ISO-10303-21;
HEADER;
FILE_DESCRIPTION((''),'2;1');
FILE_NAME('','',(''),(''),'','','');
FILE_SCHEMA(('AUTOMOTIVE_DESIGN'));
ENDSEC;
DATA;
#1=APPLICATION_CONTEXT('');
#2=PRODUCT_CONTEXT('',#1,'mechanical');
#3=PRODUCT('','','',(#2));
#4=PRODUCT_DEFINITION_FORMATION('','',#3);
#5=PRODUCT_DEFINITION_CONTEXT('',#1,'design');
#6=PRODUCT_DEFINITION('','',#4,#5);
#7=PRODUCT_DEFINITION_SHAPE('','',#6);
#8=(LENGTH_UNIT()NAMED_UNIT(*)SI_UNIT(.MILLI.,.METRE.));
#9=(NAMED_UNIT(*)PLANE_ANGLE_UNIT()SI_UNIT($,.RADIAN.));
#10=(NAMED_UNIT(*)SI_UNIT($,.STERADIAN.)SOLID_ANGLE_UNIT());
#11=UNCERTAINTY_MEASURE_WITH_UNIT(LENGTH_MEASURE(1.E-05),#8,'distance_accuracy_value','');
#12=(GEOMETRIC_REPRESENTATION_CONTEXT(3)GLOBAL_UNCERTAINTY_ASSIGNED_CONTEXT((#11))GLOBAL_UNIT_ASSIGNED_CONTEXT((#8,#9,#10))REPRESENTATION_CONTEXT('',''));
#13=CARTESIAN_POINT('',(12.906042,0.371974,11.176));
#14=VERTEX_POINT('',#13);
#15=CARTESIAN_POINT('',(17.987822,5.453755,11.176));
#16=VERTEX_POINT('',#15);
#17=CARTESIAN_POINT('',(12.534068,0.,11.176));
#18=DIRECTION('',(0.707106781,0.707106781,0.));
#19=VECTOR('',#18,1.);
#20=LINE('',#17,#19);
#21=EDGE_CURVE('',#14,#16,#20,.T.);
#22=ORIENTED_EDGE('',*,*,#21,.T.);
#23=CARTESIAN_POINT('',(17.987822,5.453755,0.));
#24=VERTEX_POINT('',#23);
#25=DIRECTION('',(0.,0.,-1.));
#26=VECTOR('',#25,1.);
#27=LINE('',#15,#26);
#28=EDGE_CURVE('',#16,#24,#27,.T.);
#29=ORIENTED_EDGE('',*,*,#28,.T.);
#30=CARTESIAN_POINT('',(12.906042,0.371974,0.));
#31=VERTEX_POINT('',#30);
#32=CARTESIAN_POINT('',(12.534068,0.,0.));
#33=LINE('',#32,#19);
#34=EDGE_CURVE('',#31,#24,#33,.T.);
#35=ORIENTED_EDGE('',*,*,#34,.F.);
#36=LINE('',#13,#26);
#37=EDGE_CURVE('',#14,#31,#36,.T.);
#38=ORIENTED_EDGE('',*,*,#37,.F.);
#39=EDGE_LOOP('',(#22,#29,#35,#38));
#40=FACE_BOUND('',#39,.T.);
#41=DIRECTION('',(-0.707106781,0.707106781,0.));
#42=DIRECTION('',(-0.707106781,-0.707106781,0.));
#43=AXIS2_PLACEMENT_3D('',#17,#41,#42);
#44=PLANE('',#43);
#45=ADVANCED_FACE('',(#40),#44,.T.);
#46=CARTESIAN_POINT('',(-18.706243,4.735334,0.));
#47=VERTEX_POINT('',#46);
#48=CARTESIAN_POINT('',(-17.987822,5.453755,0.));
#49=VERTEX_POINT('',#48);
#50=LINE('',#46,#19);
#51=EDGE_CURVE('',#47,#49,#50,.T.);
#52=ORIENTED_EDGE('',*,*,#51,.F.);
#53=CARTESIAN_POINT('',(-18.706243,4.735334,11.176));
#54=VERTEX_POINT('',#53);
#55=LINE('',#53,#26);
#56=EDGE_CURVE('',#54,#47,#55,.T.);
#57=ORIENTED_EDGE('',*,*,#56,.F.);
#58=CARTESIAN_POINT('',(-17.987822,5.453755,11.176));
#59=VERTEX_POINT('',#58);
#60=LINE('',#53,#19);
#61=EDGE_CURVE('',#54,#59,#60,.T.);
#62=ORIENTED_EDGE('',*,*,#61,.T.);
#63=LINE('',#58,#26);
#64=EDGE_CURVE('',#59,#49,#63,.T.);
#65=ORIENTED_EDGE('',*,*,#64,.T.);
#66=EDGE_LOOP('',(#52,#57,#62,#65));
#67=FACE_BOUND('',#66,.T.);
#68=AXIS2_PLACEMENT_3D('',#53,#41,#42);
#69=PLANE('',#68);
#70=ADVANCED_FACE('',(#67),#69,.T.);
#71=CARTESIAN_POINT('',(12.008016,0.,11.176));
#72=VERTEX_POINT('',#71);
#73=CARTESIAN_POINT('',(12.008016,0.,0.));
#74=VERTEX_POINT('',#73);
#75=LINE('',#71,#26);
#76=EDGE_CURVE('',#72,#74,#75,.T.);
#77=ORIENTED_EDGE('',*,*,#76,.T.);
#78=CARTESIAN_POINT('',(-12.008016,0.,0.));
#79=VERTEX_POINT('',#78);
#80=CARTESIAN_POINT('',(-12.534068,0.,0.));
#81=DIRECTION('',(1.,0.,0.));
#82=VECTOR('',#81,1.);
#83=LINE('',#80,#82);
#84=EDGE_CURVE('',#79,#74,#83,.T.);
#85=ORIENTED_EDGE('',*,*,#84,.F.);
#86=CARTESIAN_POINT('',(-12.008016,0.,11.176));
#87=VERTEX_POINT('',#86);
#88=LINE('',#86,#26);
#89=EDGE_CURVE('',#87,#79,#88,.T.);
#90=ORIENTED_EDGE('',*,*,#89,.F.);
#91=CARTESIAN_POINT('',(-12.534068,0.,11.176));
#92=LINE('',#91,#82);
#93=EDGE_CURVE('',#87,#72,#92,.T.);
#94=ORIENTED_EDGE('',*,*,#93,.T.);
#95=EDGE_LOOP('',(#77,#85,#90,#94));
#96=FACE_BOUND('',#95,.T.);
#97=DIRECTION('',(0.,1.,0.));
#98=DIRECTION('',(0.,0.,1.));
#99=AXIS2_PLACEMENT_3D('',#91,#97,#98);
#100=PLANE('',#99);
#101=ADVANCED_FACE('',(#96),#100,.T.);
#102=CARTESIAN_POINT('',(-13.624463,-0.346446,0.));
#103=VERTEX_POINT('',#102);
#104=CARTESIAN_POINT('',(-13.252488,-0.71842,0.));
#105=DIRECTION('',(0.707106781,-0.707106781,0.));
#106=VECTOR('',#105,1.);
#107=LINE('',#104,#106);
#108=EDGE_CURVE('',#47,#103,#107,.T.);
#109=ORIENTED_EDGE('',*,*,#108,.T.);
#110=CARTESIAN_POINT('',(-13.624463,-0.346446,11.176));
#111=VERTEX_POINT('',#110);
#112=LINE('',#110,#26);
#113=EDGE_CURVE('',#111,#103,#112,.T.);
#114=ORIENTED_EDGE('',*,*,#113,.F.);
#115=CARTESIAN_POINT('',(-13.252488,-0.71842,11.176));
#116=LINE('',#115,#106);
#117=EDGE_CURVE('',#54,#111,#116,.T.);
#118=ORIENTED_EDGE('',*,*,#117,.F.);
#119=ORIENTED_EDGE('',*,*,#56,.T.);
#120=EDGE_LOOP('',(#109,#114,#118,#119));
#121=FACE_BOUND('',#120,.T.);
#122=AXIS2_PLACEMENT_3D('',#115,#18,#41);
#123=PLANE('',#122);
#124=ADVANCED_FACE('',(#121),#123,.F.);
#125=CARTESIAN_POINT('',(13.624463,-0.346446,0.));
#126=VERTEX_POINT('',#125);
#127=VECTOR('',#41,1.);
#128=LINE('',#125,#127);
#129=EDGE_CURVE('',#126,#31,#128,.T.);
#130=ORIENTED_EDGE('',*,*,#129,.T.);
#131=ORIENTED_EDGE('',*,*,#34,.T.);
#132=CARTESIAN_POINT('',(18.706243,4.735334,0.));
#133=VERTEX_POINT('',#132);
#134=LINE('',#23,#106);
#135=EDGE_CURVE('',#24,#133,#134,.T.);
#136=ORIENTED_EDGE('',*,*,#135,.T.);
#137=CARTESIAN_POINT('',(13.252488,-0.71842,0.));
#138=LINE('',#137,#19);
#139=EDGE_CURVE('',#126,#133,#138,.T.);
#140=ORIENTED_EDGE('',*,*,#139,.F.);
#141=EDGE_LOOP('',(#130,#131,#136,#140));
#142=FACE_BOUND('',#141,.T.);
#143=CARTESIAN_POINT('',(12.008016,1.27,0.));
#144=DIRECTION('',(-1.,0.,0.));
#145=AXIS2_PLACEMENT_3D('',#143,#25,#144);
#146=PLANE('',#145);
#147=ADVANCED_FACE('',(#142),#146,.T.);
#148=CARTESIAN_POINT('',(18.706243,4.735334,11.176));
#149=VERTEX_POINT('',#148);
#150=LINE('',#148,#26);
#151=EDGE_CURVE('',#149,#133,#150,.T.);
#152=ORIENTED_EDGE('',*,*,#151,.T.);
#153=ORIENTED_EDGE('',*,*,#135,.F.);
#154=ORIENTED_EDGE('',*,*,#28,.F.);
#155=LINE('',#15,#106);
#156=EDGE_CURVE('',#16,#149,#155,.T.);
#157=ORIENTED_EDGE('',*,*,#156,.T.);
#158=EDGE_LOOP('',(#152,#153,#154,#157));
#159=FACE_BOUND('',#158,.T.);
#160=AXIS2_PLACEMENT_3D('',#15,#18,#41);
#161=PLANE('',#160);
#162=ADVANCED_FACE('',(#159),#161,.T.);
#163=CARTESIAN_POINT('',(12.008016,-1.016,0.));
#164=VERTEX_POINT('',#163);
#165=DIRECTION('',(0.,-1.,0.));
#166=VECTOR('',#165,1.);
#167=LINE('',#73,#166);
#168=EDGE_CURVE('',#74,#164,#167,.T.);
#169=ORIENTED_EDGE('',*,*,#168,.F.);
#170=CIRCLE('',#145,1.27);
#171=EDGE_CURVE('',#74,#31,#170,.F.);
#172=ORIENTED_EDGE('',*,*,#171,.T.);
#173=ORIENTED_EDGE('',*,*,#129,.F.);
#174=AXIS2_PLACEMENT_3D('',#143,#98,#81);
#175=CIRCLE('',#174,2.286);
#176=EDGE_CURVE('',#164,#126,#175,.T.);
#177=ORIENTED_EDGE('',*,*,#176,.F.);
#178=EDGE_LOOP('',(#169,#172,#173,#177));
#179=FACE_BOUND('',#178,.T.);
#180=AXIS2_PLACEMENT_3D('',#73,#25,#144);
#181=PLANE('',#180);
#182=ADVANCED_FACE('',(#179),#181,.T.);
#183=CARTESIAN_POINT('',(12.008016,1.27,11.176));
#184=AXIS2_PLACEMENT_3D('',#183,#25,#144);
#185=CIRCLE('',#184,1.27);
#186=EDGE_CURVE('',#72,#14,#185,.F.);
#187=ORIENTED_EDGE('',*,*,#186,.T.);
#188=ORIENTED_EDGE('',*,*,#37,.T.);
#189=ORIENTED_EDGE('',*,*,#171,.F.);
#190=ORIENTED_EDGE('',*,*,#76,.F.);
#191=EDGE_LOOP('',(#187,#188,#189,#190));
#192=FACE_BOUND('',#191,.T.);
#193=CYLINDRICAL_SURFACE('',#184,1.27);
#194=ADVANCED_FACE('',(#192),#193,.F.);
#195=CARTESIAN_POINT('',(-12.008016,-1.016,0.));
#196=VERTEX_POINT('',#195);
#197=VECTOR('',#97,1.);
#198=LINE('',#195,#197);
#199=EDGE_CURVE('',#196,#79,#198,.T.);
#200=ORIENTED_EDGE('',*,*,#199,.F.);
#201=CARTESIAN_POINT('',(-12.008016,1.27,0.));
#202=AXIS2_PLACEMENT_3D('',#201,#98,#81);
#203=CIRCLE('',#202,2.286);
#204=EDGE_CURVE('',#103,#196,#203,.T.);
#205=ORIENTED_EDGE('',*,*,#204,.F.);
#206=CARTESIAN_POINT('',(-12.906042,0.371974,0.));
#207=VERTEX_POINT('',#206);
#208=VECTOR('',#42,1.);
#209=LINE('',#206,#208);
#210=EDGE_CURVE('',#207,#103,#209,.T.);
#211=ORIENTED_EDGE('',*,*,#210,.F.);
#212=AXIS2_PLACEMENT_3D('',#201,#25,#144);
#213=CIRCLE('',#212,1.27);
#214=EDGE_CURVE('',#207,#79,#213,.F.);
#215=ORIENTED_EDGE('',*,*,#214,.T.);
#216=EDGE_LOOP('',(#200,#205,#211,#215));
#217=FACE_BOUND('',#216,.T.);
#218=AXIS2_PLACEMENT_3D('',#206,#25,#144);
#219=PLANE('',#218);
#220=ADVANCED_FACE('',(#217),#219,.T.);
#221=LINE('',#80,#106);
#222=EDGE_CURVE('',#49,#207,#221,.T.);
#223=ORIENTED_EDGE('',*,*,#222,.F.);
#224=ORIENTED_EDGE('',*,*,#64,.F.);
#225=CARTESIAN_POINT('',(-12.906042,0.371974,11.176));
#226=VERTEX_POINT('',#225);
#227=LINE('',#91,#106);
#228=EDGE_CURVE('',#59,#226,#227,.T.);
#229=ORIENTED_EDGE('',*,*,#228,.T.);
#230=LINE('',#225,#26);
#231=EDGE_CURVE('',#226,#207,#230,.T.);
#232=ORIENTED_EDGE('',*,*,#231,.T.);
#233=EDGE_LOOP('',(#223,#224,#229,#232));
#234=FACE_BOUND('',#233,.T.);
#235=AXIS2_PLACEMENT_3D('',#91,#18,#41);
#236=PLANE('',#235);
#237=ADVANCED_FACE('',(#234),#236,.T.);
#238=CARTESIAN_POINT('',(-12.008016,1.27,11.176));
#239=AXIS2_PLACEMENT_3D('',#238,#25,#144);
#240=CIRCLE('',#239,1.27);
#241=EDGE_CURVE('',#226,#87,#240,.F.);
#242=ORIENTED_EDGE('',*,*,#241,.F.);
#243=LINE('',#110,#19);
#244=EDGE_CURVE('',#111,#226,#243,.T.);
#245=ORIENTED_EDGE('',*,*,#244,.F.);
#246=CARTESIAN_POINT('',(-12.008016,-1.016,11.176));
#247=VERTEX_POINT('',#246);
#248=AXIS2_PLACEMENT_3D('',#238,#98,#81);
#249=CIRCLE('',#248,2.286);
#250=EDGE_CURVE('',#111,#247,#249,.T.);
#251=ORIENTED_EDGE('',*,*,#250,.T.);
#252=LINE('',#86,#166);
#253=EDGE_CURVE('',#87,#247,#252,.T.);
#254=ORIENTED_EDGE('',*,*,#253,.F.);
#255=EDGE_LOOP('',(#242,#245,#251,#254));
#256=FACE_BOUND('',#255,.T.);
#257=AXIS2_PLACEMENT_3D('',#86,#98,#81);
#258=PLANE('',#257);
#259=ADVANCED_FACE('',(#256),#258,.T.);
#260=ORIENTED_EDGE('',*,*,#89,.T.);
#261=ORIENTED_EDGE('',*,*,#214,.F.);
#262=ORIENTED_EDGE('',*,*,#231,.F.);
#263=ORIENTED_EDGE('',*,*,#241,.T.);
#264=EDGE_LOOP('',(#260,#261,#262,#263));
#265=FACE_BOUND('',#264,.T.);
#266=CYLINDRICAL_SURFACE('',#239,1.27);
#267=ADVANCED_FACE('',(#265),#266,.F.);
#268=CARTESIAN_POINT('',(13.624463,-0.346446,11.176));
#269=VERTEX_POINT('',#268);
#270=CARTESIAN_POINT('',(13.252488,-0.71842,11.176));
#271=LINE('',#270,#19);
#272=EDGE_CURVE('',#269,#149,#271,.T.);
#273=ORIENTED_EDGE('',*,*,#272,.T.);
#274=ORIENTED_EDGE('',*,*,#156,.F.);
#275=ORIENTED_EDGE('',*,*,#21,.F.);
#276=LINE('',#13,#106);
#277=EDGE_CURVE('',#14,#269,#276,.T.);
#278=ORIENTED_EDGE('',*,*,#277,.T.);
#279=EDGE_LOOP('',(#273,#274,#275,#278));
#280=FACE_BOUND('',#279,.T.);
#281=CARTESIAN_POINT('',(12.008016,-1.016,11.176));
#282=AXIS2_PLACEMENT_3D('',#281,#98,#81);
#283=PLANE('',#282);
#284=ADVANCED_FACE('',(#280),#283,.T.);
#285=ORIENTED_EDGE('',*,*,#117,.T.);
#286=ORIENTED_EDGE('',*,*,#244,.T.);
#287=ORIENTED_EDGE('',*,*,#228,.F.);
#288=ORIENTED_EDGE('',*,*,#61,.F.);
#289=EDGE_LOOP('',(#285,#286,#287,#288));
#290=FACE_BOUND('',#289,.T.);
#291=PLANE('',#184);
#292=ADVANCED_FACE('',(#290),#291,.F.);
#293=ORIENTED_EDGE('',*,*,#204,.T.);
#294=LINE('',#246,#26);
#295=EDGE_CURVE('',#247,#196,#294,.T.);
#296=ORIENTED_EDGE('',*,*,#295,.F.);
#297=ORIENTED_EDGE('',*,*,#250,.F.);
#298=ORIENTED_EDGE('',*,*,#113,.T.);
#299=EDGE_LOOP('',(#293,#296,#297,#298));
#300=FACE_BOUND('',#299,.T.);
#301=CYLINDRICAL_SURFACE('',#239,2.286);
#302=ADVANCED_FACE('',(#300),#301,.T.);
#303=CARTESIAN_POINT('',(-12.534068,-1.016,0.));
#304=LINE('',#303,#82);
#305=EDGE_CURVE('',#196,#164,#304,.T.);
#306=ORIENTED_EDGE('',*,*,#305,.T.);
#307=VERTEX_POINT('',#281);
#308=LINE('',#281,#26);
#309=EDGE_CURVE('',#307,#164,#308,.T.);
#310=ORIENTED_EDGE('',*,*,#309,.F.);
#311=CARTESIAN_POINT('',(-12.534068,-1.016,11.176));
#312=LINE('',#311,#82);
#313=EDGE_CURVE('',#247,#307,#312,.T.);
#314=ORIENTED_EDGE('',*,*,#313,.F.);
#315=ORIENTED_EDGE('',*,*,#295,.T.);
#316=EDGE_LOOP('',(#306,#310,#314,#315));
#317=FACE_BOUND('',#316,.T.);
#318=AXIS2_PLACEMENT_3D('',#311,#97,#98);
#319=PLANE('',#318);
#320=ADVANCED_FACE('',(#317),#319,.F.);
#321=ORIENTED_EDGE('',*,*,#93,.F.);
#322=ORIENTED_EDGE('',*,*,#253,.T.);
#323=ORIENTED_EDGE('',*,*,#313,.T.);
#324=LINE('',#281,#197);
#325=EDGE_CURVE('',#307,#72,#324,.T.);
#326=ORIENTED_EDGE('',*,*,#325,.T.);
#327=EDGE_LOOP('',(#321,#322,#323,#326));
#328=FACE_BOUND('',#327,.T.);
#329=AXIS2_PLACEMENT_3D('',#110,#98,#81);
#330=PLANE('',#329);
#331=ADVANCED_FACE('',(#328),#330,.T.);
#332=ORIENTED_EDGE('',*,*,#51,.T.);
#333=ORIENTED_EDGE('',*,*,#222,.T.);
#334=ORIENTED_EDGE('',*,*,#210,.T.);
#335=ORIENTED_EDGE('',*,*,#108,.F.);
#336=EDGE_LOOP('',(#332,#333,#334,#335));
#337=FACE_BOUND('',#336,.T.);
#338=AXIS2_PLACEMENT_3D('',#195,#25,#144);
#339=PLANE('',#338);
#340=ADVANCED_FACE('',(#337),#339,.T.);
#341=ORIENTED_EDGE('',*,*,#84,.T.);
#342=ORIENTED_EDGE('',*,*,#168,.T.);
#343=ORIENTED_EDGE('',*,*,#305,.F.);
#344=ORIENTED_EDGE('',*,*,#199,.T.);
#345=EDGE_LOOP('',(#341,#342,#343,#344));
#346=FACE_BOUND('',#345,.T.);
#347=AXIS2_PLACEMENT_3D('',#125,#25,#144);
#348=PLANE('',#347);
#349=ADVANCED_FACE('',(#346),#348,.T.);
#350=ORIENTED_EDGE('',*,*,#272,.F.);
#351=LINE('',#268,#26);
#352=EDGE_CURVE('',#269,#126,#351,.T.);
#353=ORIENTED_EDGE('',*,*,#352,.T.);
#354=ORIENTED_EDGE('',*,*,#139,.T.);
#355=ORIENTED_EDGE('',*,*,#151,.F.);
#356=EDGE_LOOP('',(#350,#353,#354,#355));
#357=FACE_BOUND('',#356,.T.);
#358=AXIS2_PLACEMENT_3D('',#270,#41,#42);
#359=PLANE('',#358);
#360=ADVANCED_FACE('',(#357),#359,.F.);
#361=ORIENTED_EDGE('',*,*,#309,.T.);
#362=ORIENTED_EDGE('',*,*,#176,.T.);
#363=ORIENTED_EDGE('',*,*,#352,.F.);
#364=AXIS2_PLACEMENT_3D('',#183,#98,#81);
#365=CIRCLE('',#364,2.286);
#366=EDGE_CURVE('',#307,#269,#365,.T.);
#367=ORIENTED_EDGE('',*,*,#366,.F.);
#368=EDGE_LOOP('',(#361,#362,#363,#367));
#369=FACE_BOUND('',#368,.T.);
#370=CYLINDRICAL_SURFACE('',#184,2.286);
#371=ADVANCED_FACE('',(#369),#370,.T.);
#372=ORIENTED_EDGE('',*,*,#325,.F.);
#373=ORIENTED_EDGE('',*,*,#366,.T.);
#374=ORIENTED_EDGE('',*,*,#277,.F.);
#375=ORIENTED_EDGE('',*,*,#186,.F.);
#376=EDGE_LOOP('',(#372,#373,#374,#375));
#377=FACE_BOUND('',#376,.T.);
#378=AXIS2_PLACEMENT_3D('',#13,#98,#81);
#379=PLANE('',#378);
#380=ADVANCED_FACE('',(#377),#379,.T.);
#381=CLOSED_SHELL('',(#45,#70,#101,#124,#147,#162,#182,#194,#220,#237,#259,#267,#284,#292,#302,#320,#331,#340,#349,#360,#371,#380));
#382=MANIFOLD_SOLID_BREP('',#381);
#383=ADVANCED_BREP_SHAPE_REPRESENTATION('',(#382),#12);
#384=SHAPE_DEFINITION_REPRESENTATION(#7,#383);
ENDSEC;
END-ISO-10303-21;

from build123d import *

# Parameters (mm, degrees)
BASE_FLANGE1_DEPTH = 11.176


# Sheet-metal steps are written as plain solids
with BuildPart() as part:
    # Sketch1 → Base-Flange1 (new body)
    with BuildSketch(Plane.XY):
        with BuildLine():
            Line((-17.987822374, 5.453754656), (-12.906042106, 0.371974388))
            ThreePointArc((-12.906042106, 0.371974388), (-12.494024453, 0.096672994), (-12.008016494, 0))
            Line((-12.008016494, 0), (12.008016494, 0))
            ThreePointArc((12.008016494, 0), (12.494024453, 0.096672994), (12.906042106, 0.371974388))
            Line((12.906042106, 0.371974388), (17.987822374, 5.453754656))
            Line((17.987822374, 5.453754656), (18.706242864, 4.735334166))
            Line((18.706242864, 4.735334166), (13.624462596, -0.346446102))
            ThreePointArc((13.624462596, -0.346446102), (12.88283082, -0.841988611), (12.008016494, -1.016))
            Line((12.008016494, -1.016), (-12.008016494, -1.016))
            ThreePointArc((-12.008016494, -1.016), (-12.88283082, -0.841988611), (-13.624462596, -0.346446102))
            Line((-13.624462596, -0.346446102), (-18.706242864, 4.735334166))
            Line((-18.706242864, 4.735334166), (-17.987822374, 5.453754656))
        make_face()
    extrude(amount=BASE_FLANGE1_DEPTH)


solid = part.part
